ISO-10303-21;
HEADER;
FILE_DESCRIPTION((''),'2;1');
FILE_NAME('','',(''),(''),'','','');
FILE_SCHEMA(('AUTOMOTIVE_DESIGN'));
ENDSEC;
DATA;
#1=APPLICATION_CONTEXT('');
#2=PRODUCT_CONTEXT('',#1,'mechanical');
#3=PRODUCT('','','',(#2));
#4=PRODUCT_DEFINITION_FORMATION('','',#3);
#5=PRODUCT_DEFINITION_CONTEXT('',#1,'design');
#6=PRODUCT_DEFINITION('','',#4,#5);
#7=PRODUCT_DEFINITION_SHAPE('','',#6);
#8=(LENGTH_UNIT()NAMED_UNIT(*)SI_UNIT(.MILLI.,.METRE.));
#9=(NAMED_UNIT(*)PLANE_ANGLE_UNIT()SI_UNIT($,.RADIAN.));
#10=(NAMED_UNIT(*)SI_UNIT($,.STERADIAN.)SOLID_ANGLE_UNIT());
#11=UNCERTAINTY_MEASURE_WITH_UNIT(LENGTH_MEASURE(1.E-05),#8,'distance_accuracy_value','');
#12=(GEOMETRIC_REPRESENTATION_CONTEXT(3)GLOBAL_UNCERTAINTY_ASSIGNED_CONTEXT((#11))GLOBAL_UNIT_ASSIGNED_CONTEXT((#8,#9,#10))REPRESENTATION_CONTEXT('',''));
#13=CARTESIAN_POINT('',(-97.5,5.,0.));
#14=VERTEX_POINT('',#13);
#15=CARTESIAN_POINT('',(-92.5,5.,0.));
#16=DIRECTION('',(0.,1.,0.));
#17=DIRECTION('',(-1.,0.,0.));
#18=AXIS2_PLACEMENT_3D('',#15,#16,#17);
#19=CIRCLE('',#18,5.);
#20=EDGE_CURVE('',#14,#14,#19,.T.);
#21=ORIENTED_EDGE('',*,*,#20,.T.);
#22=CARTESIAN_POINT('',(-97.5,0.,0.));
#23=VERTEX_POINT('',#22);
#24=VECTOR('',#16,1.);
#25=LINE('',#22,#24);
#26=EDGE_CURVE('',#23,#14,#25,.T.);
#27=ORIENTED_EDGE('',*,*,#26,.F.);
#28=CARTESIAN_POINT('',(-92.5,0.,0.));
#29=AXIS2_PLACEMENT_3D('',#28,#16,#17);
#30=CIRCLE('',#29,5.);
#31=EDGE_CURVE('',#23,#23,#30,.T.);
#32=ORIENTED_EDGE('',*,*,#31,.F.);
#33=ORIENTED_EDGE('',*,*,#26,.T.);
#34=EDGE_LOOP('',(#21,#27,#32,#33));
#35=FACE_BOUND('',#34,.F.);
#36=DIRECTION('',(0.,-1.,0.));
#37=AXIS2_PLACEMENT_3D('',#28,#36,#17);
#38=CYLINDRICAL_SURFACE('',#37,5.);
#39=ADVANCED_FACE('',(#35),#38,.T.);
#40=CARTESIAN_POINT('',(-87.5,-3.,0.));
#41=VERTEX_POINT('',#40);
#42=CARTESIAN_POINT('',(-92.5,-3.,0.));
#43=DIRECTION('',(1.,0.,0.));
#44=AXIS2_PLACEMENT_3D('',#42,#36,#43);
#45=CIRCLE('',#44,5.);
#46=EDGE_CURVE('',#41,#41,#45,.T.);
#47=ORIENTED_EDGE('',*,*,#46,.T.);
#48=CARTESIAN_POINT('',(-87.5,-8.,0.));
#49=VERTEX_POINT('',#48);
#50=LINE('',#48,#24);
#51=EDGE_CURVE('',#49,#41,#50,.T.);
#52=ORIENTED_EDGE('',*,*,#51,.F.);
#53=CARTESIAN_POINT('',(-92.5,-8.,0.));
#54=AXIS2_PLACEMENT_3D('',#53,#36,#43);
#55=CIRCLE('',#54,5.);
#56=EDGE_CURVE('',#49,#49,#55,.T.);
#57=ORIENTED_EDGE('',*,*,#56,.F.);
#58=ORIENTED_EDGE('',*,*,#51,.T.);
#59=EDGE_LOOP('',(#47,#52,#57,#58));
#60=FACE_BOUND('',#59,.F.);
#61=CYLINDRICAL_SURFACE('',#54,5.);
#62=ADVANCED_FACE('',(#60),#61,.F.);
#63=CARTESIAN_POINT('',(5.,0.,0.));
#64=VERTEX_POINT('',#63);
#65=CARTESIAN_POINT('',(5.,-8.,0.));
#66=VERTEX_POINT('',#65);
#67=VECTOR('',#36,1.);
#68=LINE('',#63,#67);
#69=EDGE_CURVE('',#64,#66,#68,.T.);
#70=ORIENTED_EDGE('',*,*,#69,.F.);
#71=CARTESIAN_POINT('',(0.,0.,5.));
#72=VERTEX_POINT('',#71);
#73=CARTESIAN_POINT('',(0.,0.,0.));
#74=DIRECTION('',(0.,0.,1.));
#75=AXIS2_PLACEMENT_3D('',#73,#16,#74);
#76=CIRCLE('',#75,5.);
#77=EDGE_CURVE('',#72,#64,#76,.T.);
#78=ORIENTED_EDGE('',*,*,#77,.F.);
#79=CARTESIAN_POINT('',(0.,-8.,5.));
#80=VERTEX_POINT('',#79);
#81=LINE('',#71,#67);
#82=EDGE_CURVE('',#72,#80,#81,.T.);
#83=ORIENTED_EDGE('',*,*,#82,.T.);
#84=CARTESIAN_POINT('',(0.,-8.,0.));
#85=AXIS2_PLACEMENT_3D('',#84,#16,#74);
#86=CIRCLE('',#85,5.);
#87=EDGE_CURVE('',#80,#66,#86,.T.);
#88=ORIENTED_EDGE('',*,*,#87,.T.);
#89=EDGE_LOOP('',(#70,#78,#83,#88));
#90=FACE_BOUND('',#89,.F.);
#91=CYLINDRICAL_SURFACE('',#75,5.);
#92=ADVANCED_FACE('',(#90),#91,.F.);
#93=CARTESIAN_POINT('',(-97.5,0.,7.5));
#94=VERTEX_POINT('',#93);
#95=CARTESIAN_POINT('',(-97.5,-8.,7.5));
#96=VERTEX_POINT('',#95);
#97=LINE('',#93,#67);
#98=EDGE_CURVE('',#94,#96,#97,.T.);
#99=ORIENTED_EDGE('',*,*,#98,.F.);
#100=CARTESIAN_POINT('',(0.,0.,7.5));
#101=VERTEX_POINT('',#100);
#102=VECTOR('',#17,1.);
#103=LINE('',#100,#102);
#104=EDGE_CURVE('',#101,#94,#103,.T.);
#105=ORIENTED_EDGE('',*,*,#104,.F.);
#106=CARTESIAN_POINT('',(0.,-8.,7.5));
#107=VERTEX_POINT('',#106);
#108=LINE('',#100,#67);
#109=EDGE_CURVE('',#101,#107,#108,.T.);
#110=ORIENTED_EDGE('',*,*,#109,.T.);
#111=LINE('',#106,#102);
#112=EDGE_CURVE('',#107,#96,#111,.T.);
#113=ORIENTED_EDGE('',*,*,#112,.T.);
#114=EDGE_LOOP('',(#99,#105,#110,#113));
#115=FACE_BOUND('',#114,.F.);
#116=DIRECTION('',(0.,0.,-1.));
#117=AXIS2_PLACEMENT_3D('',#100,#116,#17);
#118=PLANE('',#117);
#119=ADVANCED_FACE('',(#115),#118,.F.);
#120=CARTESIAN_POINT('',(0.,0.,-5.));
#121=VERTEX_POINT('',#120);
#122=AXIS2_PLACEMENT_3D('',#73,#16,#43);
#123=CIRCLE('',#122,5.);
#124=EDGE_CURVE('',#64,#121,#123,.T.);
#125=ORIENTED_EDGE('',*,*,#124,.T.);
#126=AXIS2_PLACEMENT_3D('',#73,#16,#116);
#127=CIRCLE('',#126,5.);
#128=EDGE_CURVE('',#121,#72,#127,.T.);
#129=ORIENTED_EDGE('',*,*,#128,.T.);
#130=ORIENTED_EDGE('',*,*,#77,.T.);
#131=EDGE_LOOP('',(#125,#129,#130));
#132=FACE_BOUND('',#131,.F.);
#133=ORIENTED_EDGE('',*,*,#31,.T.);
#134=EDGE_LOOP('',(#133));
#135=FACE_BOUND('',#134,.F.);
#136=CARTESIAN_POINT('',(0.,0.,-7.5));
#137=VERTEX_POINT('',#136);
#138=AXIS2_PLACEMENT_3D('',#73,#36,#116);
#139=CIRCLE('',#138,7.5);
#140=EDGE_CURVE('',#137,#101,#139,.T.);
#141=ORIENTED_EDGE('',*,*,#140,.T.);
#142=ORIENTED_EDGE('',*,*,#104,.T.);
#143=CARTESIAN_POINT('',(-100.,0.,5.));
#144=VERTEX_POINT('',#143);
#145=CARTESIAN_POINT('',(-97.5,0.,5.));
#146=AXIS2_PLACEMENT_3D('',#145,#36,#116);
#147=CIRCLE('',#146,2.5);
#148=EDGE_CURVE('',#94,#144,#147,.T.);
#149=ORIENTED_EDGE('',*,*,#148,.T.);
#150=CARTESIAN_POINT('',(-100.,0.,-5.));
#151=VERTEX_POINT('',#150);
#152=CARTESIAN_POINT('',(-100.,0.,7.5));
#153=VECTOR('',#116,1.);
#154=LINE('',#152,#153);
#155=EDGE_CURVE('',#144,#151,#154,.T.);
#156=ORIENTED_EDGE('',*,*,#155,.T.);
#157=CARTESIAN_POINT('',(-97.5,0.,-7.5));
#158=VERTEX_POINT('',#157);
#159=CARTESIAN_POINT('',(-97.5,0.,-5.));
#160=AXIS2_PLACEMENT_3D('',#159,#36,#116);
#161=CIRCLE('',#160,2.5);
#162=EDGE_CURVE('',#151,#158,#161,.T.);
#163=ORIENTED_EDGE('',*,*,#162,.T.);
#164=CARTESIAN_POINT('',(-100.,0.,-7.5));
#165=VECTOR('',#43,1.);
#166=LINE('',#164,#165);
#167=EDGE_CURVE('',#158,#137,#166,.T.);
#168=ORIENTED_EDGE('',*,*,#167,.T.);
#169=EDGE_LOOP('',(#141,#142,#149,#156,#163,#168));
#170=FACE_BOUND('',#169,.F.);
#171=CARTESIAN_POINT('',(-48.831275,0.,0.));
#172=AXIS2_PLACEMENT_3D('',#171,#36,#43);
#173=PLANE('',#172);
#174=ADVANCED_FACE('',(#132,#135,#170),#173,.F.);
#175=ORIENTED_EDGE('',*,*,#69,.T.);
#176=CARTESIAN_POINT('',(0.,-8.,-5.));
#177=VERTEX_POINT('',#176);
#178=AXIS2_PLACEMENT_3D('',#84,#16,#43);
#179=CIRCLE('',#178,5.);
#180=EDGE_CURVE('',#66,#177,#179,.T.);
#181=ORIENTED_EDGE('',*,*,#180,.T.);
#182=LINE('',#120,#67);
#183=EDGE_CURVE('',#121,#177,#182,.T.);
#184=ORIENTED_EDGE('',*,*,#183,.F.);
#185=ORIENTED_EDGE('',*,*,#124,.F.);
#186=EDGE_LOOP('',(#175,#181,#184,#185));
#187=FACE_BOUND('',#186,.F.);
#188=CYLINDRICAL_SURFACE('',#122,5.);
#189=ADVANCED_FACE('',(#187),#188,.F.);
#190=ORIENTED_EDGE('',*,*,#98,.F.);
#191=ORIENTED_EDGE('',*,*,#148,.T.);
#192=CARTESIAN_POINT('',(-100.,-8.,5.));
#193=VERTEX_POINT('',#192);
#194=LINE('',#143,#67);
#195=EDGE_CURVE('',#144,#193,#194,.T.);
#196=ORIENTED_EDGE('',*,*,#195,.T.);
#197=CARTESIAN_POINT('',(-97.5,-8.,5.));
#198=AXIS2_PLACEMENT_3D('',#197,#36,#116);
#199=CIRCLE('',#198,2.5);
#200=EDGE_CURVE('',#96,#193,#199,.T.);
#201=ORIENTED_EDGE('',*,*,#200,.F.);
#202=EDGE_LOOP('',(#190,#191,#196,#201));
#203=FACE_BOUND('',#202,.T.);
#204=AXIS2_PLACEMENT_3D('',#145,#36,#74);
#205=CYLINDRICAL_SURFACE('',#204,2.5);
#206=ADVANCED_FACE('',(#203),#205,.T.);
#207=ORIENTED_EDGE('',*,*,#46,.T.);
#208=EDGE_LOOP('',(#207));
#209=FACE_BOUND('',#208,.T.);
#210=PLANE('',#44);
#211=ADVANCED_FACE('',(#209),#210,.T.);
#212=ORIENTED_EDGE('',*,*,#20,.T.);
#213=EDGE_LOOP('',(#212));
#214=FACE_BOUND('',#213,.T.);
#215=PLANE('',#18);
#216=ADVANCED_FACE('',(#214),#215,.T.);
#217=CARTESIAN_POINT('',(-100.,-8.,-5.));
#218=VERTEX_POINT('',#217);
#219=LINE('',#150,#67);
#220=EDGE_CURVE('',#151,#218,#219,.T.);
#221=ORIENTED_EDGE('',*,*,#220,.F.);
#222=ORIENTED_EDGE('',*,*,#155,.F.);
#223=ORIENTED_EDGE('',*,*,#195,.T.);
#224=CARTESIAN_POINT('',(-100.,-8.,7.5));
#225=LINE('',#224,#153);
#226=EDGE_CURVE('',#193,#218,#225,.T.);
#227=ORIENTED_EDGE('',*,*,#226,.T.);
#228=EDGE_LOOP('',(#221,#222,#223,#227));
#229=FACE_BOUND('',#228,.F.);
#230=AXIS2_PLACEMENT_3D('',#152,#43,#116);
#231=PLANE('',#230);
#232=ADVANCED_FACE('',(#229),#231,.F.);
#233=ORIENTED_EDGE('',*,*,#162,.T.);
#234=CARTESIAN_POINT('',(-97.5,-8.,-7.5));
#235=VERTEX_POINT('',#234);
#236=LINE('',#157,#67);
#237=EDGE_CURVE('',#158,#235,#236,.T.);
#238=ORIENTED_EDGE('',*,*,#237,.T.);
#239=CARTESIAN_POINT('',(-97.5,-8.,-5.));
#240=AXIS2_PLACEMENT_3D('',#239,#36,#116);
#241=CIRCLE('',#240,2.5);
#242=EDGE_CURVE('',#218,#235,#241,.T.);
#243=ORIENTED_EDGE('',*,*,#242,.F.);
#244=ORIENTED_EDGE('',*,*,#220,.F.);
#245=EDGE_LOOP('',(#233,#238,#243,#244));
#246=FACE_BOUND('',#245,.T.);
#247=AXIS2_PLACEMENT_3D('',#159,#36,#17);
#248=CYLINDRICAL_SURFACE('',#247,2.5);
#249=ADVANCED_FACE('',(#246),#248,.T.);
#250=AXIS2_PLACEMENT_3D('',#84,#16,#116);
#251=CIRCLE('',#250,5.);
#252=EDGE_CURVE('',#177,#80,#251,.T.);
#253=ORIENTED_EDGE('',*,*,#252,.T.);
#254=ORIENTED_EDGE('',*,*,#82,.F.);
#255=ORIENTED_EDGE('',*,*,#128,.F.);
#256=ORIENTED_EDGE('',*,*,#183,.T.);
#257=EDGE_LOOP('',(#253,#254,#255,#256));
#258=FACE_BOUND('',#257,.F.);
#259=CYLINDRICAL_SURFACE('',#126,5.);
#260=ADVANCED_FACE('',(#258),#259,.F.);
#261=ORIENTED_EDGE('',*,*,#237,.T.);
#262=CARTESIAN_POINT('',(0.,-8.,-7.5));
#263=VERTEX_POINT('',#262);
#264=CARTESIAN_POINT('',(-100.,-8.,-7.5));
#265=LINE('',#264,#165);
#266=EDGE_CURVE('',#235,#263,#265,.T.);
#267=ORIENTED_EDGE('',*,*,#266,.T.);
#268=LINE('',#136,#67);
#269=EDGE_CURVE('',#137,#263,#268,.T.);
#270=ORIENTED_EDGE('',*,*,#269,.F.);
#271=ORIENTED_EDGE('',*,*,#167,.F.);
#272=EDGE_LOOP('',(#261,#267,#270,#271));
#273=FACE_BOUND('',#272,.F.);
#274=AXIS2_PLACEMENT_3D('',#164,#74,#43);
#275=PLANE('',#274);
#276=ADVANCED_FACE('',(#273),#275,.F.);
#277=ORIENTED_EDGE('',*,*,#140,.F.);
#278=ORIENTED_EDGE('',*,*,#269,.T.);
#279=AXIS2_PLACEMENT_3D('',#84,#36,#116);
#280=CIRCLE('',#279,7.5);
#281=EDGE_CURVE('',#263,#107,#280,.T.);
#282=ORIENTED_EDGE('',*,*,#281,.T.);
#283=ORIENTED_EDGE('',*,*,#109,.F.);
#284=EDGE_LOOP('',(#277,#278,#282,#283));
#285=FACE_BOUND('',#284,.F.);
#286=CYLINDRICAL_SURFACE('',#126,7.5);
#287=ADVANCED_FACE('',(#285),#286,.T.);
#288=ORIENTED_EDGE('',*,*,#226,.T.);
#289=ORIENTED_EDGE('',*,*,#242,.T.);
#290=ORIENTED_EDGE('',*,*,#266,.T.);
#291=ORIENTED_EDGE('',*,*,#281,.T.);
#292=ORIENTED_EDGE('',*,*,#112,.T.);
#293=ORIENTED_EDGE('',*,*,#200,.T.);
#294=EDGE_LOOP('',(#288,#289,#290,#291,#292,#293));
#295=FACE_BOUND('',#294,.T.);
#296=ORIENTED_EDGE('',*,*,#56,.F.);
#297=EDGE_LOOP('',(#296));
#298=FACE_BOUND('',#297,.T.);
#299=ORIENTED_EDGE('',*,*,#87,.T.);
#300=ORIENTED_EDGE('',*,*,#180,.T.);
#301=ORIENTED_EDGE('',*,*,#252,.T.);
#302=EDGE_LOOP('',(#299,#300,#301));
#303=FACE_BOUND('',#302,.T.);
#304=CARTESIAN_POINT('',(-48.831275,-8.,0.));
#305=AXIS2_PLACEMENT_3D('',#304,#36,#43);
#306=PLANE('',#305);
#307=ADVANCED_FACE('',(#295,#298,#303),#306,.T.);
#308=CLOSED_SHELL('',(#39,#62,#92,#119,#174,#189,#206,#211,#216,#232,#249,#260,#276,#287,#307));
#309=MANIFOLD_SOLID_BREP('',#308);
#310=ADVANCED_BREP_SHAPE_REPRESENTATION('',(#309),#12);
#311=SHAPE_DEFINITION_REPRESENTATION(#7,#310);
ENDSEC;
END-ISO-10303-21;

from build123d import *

# Parameters (mm, degrees)
F1_DEPTH = 8
F2_R     = 2.5
F3_R     = 5
F4_DEPTH = 5
F5_R     = 5
F6_DEPTH = 5


# Not quite as in the source:
# - a feature names something its author has since deleted; it is built from what else it names


with BuildPart() as f1:
    # F0 (on Front) → F1 (new body)
    with BuildSketch(Plane.XZ):
        with BuildLine():
            ThreePointArc((0, -7.5), (-7.5, 0), (0, 7.5))
            Line((0, 7.5), (-100, 7.5))
            Line((-100, 7.5), (-100, -7.5))
            Line((-100, -7.5), (0, -7.5))
        make_face()
        with BuildLine():
            Line((0, 5), (0, 7.5))
            ThreePointArc((0, 7.5), (-7.5, 0), (0, -7.5))
            Line((0, -7.5), (0, -5))
            ThreePointArc((0, -5), (-5, 0), (0, 5))
        make_face()
        with BuildLine():
            ThreePointArc((0, -7.5), (5.3033008589, -5.3033008589), (7.5, 0))
            ThreePointArc((7.5, 0), (5.3033008589, 5.3033008589), (0, 7.5))
            Line((0, 7.5), (0, 5))
            ThreePointArc((0, 5), (3.5355339059, 3.5355339059), (5, 0))
            ThreePointArc((5, 0), (3.5355339059, -3.5355339059), (0, -5))
            Line((0, -5), (0, -7.5))
        make_face()
    extrude(amount=F1_DEPTH)

    # F2
    f2_edges = [f1.edges().sort_by_distance(p)[0] for p in [
        (-100, -4, 7.5),
        (-100, -4, -7.5),
    ]]
    fillet(f2_edges, radius=F2_R)

    # F3 (on face) → F4 (join)
    with BuildSketch(Plane(origin=(0, 0, 0), x_dir=(-1, 0, 0), z_dir=(0, 1, 0))):
        with Locations((92.5, 0)):
            Circle(F3_R)
    extrude(amount=F4_DEPTH)

    # F5 (on face) → F6 (cut)
    with BuildSketch(Plane.XZ.offset(8)):
        with Locations((-92.5, 0)):
            Circle(F5_R)
    extrude(amount=-F6_DEPTH, mode=Mode.SUBTRACT)


solid = f1.part
